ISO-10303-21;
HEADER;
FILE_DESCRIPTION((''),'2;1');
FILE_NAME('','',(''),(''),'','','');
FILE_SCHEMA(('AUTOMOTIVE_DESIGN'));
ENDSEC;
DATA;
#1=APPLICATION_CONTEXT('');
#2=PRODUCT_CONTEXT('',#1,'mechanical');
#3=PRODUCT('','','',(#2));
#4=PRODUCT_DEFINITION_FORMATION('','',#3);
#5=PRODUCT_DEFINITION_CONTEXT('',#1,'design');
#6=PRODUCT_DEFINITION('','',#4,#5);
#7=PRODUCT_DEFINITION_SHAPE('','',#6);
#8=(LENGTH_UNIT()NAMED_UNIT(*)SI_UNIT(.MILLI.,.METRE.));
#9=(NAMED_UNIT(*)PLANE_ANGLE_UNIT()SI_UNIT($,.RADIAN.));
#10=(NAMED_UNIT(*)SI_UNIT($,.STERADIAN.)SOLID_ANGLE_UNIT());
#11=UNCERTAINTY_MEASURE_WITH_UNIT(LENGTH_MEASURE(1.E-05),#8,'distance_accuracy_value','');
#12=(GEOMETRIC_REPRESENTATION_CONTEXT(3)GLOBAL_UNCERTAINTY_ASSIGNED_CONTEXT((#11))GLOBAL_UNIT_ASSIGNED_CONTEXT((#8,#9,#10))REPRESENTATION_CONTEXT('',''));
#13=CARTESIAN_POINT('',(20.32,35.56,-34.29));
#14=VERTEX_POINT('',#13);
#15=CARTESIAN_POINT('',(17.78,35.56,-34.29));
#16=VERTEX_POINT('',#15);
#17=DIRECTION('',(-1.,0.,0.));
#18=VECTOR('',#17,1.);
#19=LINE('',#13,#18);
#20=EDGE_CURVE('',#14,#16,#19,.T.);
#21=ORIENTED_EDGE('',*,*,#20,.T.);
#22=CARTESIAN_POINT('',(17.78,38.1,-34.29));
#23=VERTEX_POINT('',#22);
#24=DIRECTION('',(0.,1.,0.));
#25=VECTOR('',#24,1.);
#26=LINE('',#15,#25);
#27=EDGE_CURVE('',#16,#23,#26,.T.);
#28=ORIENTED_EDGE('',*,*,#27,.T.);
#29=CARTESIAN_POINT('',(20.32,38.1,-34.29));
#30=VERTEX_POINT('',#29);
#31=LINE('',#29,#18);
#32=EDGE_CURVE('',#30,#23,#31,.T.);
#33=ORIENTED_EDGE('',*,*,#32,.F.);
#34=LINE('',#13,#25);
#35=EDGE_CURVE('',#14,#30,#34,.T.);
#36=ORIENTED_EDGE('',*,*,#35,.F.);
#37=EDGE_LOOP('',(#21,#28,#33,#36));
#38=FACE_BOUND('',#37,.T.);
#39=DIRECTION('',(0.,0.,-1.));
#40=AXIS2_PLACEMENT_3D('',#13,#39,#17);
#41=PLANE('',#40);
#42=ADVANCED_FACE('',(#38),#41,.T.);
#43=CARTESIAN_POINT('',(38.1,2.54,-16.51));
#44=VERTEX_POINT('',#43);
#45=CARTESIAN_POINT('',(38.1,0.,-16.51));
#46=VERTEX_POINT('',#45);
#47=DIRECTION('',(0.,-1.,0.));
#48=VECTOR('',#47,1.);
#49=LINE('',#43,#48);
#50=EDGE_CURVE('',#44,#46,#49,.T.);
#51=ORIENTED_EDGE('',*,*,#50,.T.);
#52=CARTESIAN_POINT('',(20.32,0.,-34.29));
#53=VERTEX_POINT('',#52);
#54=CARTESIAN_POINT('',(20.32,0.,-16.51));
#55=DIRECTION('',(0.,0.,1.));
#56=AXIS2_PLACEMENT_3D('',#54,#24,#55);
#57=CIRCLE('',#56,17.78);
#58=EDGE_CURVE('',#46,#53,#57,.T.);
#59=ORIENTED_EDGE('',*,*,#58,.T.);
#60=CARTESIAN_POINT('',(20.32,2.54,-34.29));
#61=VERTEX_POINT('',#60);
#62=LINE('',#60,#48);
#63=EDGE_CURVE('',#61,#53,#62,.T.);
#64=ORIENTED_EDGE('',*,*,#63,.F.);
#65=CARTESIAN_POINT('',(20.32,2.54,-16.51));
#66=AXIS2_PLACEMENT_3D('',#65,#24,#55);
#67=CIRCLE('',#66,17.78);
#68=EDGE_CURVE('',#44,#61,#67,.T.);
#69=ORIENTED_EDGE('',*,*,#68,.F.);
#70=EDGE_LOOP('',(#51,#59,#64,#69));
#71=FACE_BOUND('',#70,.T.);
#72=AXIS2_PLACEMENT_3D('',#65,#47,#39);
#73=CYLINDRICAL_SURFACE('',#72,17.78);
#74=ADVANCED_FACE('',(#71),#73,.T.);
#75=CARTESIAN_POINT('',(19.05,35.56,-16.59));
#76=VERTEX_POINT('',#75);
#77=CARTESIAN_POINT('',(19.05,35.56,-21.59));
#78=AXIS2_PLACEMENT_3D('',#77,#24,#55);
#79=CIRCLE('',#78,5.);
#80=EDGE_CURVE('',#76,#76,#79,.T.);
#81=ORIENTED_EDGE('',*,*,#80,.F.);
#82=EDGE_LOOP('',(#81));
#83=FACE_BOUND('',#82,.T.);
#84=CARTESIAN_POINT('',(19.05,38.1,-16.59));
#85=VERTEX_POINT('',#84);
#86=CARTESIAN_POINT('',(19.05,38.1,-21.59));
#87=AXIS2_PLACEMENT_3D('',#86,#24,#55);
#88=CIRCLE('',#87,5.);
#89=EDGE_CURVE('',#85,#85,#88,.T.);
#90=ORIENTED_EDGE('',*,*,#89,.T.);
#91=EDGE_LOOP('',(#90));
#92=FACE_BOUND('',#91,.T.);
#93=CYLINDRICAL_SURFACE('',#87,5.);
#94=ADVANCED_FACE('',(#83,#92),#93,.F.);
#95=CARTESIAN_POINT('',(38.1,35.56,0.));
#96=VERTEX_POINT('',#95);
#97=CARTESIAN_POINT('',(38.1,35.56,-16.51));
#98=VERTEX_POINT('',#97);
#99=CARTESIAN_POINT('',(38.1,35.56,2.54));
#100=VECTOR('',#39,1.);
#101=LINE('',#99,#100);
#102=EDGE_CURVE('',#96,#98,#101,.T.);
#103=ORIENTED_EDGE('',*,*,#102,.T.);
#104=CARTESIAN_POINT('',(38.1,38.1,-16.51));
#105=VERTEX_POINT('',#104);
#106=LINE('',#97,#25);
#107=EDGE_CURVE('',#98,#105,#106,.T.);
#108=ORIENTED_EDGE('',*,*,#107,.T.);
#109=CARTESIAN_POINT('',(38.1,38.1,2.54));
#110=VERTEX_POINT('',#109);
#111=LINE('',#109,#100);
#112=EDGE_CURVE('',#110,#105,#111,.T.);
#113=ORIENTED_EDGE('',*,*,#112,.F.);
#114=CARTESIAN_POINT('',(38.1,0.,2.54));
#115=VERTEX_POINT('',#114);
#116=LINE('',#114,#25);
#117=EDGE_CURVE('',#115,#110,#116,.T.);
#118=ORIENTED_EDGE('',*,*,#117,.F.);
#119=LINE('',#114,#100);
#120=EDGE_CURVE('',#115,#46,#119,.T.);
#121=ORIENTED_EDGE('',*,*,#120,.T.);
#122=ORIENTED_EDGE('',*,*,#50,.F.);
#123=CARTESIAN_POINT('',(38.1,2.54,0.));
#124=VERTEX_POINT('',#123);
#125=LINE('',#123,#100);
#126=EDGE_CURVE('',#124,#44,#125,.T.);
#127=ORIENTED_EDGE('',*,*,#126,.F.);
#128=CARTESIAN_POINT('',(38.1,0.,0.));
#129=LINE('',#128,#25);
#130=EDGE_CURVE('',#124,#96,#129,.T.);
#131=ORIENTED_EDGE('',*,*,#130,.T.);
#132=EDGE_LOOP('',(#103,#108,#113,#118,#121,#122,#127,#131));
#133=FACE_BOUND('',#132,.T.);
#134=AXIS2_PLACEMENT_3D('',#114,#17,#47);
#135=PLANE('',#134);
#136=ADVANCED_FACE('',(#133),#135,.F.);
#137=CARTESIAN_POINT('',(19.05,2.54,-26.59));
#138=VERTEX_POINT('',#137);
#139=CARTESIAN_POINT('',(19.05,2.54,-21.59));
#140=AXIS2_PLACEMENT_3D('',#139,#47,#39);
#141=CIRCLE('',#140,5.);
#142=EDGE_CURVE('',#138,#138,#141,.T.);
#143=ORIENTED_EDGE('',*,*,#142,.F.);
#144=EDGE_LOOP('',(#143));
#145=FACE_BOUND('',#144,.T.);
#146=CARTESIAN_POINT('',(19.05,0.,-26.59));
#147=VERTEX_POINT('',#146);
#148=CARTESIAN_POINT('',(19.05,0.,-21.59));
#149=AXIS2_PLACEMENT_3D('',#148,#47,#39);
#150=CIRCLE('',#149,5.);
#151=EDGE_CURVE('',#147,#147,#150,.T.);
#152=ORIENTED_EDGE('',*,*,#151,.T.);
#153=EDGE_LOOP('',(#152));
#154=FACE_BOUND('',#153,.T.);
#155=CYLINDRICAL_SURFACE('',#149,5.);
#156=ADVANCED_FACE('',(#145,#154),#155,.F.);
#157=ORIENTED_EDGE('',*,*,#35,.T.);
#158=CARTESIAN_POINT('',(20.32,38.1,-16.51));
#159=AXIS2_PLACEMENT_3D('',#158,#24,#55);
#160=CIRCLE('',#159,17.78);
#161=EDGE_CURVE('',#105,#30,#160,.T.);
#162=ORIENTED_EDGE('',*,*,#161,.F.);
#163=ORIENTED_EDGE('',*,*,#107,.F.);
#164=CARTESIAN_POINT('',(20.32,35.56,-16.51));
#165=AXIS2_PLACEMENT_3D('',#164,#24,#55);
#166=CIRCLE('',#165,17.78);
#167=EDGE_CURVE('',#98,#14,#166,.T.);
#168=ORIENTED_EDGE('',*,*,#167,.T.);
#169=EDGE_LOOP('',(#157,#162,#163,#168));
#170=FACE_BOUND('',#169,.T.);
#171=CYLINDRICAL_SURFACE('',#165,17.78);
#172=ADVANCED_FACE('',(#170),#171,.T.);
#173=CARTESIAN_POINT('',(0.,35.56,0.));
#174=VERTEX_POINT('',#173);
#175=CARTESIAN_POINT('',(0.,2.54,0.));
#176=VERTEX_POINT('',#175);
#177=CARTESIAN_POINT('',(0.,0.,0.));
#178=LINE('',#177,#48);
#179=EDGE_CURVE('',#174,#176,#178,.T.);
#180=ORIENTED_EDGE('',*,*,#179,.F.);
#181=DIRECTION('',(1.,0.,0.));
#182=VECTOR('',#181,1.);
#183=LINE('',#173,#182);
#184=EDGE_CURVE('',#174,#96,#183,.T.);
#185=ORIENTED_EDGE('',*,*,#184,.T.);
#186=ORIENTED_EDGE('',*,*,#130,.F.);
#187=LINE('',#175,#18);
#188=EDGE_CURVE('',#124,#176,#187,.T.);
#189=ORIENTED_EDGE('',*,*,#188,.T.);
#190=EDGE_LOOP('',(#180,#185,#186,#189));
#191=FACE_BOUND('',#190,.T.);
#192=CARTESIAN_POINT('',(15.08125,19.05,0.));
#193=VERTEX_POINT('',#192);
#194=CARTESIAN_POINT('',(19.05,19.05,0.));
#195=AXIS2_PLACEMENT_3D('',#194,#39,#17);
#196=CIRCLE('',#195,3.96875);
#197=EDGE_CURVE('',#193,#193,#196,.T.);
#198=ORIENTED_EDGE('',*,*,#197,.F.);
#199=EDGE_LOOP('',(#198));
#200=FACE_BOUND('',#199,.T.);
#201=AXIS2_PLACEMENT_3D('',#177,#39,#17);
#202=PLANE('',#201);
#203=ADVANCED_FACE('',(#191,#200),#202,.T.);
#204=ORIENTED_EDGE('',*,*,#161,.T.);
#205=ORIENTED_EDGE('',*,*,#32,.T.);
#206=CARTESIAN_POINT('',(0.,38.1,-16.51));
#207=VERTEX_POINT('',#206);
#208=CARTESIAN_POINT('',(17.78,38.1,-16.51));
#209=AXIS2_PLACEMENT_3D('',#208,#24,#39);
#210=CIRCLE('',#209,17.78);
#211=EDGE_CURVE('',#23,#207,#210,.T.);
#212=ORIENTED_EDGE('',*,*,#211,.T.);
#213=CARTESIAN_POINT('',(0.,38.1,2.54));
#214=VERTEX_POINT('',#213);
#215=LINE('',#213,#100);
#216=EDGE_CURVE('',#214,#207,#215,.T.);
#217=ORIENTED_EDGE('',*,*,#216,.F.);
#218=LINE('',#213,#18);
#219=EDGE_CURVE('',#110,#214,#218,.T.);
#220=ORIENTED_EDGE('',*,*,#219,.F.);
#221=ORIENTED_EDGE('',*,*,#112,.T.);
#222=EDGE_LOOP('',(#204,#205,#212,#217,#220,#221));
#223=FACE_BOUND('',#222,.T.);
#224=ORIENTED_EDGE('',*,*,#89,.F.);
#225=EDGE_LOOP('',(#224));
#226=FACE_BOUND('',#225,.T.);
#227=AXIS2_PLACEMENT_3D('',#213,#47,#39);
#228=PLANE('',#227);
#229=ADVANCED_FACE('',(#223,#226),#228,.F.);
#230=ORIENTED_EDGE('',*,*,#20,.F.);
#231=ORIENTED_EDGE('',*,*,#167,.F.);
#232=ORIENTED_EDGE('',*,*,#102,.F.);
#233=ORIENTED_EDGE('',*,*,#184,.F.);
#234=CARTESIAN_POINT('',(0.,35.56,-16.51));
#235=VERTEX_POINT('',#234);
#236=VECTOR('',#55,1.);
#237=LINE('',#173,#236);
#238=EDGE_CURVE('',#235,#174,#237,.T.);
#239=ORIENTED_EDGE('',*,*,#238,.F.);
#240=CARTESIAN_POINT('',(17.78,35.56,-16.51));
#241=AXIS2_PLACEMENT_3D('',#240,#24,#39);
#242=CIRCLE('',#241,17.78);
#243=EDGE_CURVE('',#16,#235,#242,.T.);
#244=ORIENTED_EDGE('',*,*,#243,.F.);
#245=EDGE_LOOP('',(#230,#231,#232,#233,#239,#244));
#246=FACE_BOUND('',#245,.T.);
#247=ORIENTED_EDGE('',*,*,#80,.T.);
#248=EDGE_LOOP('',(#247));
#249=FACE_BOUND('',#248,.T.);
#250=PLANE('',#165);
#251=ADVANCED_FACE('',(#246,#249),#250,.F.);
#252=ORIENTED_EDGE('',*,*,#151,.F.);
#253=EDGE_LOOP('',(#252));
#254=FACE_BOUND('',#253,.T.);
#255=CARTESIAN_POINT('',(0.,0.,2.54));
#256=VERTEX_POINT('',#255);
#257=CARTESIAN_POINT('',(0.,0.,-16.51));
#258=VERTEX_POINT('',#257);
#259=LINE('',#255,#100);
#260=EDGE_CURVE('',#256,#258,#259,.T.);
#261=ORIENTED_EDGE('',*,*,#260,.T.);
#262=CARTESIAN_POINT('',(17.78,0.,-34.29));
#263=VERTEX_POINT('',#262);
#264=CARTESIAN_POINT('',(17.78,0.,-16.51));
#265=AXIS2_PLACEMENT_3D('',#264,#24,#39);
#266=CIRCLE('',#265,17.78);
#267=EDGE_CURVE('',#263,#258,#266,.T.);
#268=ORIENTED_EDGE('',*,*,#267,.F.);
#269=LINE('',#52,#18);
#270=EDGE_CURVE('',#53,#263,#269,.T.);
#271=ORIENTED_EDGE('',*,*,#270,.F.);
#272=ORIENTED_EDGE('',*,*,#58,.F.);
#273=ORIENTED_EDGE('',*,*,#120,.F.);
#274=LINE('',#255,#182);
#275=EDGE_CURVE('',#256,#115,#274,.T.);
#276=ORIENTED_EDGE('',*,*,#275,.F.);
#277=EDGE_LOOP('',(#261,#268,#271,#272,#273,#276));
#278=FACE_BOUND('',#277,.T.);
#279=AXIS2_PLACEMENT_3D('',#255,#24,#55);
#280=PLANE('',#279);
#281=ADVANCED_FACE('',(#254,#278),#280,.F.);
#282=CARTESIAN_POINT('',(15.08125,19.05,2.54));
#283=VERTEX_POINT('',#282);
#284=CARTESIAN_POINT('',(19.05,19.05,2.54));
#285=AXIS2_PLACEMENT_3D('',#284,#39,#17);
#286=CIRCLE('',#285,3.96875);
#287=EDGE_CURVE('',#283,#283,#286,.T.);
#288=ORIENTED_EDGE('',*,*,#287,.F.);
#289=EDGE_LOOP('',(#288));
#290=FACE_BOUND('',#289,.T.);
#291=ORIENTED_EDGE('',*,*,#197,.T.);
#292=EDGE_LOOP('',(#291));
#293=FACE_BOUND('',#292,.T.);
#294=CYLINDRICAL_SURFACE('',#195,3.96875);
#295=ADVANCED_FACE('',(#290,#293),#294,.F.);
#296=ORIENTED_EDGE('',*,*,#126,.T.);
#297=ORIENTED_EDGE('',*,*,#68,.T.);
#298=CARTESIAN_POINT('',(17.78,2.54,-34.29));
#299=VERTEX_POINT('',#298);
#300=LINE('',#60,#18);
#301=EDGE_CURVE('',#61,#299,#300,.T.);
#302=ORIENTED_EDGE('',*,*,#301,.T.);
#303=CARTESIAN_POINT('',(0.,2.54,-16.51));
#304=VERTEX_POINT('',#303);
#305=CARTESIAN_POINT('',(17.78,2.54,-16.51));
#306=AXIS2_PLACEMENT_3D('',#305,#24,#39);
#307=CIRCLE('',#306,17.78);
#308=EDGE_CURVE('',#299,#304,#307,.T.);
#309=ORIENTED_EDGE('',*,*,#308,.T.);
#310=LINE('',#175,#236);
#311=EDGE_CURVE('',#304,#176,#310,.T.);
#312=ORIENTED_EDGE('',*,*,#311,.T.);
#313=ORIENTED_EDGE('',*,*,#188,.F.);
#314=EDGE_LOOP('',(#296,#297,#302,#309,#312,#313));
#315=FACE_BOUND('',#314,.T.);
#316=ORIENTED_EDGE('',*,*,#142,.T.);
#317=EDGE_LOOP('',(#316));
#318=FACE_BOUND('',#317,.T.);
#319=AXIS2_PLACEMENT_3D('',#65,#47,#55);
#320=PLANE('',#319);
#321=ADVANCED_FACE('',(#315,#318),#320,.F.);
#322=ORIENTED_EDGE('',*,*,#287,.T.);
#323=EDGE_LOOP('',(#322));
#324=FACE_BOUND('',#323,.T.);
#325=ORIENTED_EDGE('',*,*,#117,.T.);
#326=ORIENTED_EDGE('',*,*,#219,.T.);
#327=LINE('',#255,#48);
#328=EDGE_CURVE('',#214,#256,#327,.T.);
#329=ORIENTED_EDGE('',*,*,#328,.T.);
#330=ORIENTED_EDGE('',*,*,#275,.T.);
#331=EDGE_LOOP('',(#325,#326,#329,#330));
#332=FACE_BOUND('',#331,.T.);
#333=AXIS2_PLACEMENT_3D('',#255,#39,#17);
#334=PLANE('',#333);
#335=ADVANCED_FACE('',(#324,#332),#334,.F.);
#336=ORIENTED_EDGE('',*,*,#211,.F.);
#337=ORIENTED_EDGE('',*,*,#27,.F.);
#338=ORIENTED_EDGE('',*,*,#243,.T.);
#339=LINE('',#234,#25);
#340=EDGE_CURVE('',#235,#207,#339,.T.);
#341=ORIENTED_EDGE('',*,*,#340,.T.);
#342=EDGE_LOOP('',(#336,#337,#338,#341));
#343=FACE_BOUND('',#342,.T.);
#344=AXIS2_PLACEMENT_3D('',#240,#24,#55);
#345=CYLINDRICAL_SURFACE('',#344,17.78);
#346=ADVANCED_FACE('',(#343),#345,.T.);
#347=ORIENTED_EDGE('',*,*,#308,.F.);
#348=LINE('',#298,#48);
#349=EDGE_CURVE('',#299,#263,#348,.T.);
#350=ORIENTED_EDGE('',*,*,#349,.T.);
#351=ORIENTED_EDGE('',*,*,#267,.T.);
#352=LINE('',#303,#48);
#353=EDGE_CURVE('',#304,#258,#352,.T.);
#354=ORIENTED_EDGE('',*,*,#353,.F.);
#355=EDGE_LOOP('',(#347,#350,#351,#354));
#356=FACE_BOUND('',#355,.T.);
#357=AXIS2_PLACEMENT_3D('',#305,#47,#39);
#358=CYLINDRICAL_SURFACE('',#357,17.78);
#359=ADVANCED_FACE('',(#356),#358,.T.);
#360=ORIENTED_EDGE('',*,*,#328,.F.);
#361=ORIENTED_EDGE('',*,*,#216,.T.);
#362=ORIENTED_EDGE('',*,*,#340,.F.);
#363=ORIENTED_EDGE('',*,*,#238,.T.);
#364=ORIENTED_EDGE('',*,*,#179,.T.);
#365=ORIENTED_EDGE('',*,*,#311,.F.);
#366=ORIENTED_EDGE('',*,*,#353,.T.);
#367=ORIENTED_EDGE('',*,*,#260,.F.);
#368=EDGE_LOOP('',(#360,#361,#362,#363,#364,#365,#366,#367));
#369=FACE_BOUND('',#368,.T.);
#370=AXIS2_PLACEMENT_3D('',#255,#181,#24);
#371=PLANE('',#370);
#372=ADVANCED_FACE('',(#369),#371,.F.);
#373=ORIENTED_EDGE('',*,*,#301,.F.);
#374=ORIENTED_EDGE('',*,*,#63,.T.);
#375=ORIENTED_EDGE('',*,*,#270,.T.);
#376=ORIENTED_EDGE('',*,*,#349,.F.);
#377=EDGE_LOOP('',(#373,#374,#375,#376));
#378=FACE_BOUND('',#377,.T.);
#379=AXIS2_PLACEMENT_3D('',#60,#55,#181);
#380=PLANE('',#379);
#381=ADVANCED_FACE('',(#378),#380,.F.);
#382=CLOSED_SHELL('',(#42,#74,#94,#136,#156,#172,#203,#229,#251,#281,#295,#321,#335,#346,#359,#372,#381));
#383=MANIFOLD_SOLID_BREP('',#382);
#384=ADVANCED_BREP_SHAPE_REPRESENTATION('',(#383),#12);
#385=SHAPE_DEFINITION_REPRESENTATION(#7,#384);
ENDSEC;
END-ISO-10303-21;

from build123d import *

# Parameters (mm, degrees)
SKETCH2_W                      = 38.1
SKETCH2_H                      = 38.1
BOSS_EXTRUDE1_DEPTH            = 2.54
F_5_16_0_3125_DIAMETER_HOLE1_D = 7.9375
BOSS_EXTRUDE2_DEPTH            = 2.54
F_10_0MM_DOWEL_HOLE1_D         = 10


with BuildPart() as part:
    # Sketch2 → Boss-Extrude1 (new body)
    with BuildSketch(Plane.XY):
        with Locations((19.05, 19.05)):
            Rectangle(SKETCH2_W, SKETCH2_H)
    boss_extrude1 = extrude(amount=BOSS_EXTRUDE1_DEPTH)

    # 5/16 (0.3125) Diameter Hole1 (through all)
    with Locations(Plane(origin=(19.05, 19.05, 0), x_dir=(-1, 0, 0), z_dir=(0, 0, -1))):
        with Locations((0, 0)):
            f_5_16_0_3125_diameter_hole1 = Hole(F_5_16_0_3125_DIAMETER_HOLE1_D / 2)

    # Sketch4 → Boss-Extrude2 (add)
    with BuildSketch(Plane(origin=(0, 38.1, 0), x_dir=(1, 0, 0), z_dir=(0, 1, 0))):
        with BuildLine():
            Line((0, 0), (0, 16.51))
            ThreePointArc((0, 16.51), (5.207641431, 29.082358569), (17.78, 34.29))
            Line((17.78, 34.29), (20.32, 34.29))
            ThreePointArc((20.32, 34.29), (32.892358569, 29.082358569), (38.1, 16.51))
            Line((38.1, 16.51), (38.1, 0))
            Line((38.1, 0), (38.1, -2.54))
            Line((38.1, -2.54), (0, -2.54))
            Line((0, -2.54), (0, 0))
        make_face()
    boss_extrude2 = extrude(amount=-BOSS_EXTRUDE2_DEPTH)

    # Ø10.0mm Dowel Hole1 (through all)
    with Locations(Plane(origin=(0, 38.1, 0), x_dir=(1, 0, 0), z_dir=(0, 1, 0))):
        with Locations((19.05, 21.59)):
            f_10_0mm_dowel_hole1 = Hole(F_10_0MM_DOWEL_HOLE1_D / 2)

    # Mirror4: Boss-Extrude1, 5/16 (0.3125) Diameter Hole1, Boss-Extrude2, Ø10.0mm Dowel Hole1 across plane
    add(boss_extrude1.mirror(Plane(origin=(0, 19.05, 0), x_dir=(0, 0, 1), z_dir=(0, -1, 0))))
    add(f_5_16_0_3125_diameter_hole1.mirror(Plane(origin=(0, 19.05, 0), x_dir=(0, 0, 1), z_dir=(0, -1, 0))), mode=Mode.SUBTRACT)
    add(boss_extrude2.mirror(Plane(origin=(0, 19.05, 0), x_dir=(0, 0, 1), z_dir=(0, -1, 0))))
    add(f_10_0mm_dowel_hole1.mirror(Plane(origin=(0, 19.05, 0), x_dir=(0, 0, 1), z_dir=(0, -1, 0))), mode=Mode.SUBTRACT)


solid = part.part
